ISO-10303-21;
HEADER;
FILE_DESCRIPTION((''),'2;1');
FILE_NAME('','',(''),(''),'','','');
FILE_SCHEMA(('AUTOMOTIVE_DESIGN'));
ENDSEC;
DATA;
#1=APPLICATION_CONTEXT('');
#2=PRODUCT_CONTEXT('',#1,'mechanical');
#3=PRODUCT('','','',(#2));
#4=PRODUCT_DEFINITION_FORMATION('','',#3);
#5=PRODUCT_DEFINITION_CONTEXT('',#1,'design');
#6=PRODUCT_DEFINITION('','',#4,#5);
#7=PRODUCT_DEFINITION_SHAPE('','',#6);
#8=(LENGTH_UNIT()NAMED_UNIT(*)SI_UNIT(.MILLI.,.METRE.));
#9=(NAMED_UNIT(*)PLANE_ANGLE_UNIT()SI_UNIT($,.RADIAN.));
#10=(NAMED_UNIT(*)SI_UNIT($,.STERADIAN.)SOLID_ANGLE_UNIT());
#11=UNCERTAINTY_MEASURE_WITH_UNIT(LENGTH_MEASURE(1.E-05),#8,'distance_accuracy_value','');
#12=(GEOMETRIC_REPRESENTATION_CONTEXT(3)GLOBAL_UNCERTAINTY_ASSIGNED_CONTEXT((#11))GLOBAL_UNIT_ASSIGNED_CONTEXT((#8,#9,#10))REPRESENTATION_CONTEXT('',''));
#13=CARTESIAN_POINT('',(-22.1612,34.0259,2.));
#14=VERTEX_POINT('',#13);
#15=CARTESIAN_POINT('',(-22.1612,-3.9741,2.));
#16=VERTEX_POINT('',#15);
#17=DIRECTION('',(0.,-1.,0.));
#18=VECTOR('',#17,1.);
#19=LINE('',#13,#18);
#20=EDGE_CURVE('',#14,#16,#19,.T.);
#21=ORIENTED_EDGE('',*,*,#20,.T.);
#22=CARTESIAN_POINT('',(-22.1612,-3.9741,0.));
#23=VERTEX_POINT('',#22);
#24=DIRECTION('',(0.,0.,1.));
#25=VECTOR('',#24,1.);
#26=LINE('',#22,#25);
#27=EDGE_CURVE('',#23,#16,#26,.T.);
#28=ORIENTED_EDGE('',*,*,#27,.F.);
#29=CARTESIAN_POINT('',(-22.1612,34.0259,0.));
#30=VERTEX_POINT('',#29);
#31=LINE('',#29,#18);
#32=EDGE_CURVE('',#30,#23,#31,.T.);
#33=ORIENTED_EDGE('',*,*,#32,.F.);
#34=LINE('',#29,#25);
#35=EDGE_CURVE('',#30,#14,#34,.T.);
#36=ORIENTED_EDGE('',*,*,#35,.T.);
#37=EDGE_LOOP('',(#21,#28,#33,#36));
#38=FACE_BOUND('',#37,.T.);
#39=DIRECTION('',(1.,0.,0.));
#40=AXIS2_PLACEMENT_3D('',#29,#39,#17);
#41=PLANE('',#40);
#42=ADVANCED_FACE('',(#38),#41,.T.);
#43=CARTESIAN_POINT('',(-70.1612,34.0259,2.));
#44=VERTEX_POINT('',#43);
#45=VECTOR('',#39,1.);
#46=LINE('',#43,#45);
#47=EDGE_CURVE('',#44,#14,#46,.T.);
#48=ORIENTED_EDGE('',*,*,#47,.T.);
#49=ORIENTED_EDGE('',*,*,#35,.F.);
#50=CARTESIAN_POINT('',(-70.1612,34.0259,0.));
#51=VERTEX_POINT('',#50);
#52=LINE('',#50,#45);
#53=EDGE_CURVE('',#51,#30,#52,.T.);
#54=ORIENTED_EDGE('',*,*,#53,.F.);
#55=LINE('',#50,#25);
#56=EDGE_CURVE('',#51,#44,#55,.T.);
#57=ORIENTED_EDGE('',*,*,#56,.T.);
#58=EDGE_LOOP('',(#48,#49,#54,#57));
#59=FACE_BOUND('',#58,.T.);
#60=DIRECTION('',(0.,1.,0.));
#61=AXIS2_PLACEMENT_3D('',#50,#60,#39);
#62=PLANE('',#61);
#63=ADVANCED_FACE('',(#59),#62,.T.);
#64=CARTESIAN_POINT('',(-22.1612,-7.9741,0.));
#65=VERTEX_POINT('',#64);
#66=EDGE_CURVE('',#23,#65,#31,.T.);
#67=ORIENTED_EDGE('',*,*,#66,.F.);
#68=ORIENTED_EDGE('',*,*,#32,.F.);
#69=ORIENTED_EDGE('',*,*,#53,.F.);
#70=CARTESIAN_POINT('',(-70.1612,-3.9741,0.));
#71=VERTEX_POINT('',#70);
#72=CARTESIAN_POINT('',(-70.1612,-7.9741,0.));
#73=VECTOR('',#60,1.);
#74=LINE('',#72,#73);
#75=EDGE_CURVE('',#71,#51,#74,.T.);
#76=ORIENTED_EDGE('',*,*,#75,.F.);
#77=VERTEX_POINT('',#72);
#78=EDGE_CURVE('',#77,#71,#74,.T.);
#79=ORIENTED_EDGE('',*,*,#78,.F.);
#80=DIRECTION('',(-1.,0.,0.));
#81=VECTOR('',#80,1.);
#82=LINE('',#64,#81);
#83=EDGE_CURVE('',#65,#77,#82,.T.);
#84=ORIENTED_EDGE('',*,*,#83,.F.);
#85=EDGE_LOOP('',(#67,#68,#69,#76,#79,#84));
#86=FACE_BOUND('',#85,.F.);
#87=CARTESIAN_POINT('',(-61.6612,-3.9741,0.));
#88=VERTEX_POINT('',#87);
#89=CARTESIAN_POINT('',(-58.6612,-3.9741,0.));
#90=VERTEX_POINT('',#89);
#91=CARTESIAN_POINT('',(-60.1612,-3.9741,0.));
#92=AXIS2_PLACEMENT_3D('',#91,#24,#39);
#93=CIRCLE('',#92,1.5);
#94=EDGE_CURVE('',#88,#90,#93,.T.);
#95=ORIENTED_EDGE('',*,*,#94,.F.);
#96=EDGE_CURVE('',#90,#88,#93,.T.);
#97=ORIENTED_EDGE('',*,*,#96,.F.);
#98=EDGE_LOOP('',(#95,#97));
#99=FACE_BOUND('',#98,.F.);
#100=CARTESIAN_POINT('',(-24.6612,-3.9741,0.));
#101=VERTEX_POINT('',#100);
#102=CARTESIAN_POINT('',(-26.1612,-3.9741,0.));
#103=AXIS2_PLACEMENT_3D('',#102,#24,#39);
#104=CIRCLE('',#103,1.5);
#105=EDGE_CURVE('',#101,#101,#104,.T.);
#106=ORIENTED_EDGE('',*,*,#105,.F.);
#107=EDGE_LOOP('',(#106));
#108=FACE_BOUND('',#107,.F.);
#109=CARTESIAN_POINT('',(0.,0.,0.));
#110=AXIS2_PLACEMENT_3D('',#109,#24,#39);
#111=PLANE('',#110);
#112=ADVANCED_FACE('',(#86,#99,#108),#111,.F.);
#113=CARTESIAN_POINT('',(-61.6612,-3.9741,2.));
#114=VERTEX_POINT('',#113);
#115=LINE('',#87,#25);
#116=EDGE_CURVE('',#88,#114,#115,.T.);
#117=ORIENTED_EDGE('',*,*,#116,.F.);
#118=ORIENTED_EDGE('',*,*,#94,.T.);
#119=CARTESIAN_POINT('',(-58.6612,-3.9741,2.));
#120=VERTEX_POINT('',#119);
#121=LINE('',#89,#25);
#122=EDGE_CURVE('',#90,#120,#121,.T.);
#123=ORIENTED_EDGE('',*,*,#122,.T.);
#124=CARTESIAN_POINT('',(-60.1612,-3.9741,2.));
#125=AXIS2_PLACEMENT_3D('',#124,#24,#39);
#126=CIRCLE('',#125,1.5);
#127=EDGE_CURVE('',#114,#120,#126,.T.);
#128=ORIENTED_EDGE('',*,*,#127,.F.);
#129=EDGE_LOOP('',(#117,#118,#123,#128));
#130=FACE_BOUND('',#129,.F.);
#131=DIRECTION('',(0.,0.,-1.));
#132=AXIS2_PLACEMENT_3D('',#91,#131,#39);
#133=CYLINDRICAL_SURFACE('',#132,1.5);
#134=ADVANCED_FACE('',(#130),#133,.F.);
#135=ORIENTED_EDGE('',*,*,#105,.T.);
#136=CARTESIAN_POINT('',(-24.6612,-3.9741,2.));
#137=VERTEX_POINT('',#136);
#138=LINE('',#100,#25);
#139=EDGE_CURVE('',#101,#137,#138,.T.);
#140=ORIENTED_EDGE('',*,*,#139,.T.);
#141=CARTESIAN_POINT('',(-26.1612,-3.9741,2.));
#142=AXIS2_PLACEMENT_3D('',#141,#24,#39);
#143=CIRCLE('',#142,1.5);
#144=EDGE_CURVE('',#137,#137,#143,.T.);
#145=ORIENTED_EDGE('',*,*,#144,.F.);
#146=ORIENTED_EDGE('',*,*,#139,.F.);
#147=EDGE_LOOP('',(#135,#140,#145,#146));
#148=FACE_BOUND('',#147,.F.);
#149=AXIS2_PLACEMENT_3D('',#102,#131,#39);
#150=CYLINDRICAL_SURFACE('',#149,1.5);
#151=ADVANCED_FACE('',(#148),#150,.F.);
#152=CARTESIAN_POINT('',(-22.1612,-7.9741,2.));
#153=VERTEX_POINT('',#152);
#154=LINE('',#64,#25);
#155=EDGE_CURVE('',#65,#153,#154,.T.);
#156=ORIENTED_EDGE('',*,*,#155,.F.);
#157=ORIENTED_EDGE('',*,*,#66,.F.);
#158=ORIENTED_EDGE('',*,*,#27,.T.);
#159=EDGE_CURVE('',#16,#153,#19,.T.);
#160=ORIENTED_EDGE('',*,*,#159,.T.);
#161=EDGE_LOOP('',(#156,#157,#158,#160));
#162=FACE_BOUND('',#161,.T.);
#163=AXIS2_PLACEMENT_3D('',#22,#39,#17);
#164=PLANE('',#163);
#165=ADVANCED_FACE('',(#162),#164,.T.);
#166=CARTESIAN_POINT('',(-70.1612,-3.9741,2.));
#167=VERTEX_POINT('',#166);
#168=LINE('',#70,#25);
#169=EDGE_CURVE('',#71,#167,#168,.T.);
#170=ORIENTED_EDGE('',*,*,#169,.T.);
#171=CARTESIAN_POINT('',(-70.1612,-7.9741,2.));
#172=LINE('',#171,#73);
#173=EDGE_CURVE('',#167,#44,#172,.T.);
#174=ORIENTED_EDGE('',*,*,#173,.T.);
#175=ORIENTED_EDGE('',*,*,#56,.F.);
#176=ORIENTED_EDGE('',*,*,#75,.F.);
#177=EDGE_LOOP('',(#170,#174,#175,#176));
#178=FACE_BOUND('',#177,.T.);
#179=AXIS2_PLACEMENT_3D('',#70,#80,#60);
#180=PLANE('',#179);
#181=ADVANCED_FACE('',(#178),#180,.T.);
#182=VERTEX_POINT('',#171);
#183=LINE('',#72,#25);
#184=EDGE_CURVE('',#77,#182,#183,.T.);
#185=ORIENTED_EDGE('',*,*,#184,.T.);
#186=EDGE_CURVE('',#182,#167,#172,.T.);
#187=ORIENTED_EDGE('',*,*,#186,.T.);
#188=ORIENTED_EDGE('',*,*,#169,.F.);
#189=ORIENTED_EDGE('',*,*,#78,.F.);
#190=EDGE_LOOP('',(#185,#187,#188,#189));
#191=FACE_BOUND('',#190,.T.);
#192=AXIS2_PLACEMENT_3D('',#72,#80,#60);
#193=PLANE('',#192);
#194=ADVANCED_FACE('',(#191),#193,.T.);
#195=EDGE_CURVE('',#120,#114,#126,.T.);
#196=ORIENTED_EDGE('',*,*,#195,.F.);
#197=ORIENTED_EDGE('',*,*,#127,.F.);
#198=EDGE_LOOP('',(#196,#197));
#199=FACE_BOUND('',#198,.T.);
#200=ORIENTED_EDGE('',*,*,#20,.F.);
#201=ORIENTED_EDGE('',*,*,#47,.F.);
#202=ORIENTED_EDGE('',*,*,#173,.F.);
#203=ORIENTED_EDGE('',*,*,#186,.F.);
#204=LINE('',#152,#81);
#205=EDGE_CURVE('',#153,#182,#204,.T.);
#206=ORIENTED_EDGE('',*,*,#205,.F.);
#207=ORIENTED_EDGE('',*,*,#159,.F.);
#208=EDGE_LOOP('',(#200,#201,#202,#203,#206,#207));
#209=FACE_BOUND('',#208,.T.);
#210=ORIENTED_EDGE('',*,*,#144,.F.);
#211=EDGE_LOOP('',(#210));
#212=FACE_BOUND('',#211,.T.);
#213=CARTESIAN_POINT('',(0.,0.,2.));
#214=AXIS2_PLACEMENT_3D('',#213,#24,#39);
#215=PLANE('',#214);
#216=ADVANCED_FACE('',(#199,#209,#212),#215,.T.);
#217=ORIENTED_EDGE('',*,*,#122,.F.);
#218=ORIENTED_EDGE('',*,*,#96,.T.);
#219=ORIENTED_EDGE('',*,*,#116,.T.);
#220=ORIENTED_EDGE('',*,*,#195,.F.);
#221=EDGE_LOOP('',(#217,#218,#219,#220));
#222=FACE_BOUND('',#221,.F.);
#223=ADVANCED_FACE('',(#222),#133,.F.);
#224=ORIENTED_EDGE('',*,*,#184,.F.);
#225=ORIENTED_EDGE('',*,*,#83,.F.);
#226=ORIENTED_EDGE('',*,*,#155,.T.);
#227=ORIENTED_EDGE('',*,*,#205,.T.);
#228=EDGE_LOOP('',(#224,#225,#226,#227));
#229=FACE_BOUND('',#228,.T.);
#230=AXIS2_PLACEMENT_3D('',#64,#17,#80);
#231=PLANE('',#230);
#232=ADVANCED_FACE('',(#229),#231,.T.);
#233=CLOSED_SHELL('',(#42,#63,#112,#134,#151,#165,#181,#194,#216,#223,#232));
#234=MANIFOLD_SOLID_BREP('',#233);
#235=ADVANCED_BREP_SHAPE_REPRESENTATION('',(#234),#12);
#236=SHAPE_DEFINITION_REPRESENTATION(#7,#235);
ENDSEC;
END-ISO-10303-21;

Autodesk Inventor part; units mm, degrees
ref_plane "YZ Plane" through (0, 0, 0) normal (1, 0, 0) x (0, 1, 0)
ref_plane "XZ Plane" through (0, 0, 0) normal (0, 1, 0) x (-1, 0, 0)
ref_plane "XY Plane" through (0, 0, 0) normal (0, 0, 1) x (1, 0, 0)
sketch "Sketch2" plane through (0, 0, 0) normal (0, 0, 1) x (1, 0, 0)
  line L0 (-22.1612, -7.9741) -> (-70.1612, -7.9741)
  line L1 (-70.1612, -7.9741) -> (-70.1612, 34.0259)
  line L2 (-70.1612, 34.0259) -> (-22.1612, 34.0259)
  line L3 (-22.1612, 34.0259) -> (-22.1612, -7.9741)
  line L4 (-70.1612, -7.9741) -> (-70.1612, -3.9741)
  line L5 (-70.1612, -3.9741) -> (-60.1612, -3.9741)
  line L6 (-22.1612, -7.9741) -> (-22.1612, -3.9741)
  line L7 (-22.1612, -3.9741) -> (-26.1612, -3.9741)
  circle A0 centre (-60.1612, -3.9741) radius 1.5
  circle A1 centre (-26.1612, -3.9741) radius 1.5
  point P0 (0, 0)
  dimension "d0" = 48
  dimension "d1" = 42
  dimension "d2" = 4
  dimension "d3" = 10
  dimension "d4" = 4
  dimension "d5" = 4
  dimension "d6" = 3
  dimension "d7" = 3
extrude "Extrusion1" add sketch "Sketch2" along normal blind 2
properties part number "driver kort"
